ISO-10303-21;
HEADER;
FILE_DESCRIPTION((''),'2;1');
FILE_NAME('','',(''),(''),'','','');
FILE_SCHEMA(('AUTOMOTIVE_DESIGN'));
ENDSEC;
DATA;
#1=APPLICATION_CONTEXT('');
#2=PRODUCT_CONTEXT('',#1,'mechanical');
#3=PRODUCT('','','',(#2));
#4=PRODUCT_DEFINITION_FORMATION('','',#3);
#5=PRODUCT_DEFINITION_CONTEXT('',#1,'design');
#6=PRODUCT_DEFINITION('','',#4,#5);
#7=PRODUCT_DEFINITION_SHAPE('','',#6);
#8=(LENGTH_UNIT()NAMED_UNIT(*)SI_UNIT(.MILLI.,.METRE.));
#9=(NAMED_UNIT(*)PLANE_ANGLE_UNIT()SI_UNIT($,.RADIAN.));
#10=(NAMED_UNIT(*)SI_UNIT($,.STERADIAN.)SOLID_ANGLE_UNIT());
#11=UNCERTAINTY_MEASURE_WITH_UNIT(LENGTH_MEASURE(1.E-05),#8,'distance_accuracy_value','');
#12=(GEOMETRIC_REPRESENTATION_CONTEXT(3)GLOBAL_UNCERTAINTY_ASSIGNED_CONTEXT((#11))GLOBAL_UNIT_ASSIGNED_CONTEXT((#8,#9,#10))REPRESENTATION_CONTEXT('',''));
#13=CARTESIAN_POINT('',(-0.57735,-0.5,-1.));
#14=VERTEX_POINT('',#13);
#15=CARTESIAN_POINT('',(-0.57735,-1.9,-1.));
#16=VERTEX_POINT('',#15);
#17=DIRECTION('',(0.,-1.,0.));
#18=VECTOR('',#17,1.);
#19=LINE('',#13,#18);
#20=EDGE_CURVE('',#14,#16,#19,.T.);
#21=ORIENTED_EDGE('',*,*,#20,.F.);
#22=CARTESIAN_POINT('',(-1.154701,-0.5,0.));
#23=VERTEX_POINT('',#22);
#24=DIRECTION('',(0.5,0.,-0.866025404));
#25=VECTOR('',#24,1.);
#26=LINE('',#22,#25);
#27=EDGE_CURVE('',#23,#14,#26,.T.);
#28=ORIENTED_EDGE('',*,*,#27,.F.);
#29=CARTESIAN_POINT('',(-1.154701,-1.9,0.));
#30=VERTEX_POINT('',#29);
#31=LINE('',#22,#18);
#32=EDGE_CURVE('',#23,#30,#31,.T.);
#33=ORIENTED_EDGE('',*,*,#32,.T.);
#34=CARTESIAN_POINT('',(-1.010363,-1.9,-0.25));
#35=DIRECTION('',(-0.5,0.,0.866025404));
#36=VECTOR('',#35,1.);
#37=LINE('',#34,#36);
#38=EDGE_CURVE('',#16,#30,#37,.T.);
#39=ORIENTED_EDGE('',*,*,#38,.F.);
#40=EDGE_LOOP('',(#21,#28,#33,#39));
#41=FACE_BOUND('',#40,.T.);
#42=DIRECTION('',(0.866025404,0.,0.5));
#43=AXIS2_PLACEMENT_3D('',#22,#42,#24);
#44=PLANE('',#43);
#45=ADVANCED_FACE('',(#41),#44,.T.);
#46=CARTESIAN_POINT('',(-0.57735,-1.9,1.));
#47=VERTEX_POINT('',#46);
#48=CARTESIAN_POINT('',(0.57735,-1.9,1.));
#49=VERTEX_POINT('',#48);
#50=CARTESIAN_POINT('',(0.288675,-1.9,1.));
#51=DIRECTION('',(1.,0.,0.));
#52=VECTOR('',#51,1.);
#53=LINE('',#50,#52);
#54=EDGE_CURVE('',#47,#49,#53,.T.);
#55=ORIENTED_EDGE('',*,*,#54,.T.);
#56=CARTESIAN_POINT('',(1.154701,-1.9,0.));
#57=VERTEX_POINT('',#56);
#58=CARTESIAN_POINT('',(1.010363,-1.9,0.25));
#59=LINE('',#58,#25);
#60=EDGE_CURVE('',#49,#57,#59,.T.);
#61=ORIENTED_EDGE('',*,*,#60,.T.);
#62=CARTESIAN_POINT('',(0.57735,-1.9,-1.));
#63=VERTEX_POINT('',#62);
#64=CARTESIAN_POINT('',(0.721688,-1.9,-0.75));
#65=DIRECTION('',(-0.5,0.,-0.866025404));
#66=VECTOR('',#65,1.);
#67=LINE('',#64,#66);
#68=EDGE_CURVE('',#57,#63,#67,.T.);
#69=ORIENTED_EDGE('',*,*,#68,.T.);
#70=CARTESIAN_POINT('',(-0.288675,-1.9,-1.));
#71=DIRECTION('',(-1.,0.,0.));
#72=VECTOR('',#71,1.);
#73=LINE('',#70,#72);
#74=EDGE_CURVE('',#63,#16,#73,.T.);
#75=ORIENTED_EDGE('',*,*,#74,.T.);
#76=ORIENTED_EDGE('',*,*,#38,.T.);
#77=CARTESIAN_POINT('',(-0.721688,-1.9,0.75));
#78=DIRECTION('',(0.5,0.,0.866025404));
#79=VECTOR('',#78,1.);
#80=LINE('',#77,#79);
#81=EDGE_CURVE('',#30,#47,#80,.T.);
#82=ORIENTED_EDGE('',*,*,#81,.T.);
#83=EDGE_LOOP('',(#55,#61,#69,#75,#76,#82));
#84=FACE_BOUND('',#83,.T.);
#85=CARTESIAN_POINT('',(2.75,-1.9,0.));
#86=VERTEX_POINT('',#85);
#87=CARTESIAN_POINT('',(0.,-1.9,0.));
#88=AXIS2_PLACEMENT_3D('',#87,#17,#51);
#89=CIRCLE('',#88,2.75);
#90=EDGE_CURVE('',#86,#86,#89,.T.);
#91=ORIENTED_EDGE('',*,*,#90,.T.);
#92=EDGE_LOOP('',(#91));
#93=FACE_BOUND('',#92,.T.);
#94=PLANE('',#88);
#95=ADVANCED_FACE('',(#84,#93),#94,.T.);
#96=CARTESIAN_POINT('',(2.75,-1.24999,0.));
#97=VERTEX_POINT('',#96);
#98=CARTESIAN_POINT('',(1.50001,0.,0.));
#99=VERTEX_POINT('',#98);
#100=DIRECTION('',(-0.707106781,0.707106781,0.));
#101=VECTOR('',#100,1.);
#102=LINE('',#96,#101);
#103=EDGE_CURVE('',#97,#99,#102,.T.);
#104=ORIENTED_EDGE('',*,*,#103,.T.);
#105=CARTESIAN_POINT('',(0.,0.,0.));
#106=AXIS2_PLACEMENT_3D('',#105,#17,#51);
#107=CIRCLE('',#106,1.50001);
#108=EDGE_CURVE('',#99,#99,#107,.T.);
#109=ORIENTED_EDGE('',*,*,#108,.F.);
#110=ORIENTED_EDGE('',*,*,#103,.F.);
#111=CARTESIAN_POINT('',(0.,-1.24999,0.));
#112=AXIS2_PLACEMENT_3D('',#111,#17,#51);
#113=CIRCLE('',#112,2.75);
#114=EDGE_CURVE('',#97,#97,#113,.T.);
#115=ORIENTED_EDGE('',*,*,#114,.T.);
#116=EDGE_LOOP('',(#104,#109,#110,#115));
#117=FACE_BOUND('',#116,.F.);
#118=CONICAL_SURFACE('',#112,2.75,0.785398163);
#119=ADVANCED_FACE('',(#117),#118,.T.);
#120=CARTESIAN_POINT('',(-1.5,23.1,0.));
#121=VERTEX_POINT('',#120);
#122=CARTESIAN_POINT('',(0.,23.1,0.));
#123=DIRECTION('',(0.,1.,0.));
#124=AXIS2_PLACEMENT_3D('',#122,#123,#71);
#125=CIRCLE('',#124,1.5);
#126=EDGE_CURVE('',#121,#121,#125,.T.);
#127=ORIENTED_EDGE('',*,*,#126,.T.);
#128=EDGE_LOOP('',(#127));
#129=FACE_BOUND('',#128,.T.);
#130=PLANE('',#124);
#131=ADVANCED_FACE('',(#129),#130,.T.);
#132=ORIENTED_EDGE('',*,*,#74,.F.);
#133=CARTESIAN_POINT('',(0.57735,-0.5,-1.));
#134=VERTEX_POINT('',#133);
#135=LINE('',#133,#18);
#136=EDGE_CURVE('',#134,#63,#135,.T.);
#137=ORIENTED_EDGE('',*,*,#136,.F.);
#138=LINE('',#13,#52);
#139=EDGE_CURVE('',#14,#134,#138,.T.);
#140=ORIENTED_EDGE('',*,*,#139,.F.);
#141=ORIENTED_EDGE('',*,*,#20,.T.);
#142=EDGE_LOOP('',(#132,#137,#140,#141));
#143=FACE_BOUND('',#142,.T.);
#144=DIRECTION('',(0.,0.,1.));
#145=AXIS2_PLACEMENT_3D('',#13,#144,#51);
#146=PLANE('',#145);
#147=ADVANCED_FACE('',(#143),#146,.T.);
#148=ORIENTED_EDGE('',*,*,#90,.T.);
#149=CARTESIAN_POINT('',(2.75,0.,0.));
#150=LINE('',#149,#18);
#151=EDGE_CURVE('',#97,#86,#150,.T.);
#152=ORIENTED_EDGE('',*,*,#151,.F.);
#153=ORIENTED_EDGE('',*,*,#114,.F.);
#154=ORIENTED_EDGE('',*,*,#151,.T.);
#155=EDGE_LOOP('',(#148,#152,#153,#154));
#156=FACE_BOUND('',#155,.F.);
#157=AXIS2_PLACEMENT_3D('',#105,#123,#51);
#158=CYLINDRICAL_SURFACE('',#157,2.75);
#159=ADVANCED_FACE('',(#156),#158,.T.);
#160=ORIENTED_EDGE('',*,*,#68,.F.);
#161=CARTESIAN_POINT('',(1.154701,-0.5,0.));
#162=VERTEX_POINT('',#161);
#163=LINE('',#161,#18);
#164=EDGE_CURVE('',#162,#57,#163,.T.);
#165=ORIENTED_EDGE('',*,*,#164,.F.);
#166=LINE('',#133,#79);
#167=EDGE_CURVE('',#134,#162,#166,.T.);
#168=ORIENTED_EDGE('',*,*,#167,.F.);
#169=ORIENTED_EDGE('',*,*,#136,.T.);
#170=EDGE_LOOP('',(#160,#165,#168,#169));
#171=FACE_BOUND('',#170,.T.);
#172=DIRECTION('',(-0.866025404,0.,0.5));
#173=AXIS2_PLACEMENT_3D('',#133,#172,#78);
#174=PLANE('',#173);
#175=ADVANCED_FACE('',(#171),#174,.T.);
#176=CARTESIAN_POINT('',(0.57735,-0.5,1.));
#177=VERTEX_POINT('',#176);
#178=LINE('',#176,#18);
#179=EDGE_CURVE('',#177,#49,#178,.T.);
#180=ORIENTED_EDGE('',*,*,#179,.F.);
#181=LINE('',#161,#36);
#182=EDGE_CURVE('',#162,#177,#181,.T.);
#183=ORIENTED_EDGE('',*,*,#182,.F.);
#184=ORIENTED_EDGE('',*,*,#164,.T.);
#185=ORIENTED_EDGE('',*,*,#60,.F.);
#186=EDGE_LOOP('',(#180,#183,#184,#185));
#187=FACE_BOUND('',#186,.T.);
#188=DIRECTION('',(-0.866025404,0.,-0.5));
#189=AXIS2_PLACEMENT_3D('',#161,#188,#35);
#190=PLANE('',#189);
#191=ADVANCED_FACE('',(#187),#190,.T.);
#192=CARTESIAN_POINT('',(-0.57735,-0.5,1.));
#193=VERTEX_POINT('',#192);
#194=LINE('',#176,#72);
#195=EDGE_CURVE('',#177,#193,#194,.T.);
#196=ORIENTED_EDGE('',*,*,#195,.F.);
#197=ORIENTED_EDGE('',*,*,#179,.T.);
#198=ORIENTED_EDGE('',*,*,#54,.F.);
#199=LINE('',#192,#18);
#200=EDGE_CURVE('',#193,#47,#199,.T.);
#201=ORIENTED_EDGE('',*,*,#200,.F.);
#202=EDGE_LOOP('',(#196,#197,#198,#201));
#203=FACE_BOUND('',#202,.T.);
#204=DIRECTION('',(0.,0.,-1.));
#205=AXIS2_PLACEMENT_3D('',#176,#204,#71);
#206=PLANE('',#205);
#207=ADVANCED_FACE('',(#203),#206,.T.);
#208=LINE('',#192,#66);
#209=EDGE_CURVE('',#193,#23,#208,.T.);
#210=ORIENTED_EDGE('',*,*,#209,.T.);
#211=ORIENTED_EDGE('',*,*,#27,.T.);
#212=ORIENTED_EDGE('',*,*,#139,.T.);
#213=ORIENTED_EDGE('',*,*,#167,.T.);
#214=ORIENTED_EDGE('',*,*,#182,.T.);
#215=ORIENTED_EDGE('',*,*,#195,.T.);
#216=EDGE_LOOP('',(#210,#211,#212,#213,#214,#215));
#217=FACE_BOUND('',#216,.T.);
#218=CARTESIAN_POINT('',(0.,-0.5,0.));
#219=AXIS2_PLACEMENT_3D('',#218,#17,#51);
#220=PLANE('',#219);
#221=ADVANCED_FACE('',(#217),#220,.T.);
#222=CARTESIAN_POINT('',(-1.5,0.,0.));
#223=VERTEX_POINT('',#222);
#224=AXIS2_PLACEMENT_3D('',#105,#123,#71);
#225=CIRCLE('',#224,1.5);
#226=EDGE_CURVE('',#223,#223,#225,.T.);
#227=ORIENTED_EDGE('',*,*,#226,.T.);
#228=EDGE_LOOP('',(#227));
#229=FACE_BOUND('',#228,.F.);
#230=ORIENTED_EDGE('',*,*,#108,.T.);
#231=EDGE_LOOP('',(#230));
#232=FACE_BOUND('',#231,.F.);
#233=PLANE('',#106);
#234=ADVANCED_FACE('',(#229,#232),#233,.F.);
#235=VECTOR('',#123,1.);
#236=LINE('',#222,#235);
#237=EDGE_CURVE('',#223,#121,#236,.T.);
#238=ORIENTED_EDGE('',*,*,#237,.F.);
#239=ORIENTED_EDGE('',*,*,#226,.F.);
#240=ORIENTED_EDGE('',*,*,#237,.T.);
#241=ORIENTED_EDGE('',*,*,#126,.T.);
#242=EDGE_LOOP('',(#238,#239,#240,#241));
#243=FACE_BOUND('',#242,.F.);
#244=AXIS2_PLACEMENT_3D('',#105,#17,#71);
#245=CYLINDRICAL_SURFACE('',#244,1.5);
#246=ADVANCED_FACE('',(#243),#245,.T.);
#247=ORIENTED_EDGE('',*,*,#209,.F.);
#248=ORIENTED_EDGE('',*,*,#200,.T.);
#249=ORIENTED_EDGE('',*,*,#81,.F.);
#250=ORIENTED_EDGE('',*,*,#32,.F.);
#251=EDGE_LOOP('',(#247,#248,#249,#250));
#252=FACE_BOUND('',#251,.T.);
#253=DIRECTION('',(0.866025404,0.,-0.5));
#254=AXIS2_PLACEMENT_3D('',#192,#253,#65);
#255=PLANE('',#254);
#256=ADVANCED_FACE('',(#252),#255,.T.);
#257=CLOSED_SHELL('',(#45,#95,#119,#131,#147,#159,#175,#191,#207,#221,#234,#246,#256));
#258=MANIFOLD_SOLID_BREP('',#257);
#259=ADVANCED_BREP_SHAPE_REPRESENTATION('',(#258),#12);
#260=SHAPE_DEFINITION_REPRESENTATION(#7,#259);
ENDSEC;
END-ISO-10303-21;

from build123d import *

# Parameters (mm, degrees)
F0_R     = 2.75
F1_DEPTH = 1.9
F2_R     = 1.5
F3_DEPTH = 23.1
F5_START = 0.5
F5_DEPTH = 4.5
F6_SIZE2 = 1.24999
F6_SIZE  = 1.24999


# Not quite as in the source:
# - a fillet or chamfer is up to 0.001 mm smaller than in the source, because OpenCascade refuses the exact size


with BuildPart() as f1:
    # F0 (on Front) → F1 (new body)
    with BuildSketch(Plane.XZ):
        Circle(F0_R)
    extrude(amount=F1_DEPTH)

    # F2 (on face) → F3 (join)
    with BuildSketch(Plane(origin=(0, 0, 0), x_dir=(-1, 0, 0), z_dir=(0, 1, 0))):
        Circle(F2_R)
    extrude(amount=F3_DEPTH)

    # F4 (on Front) → F5 (cut)
    with BuildSketch(Plane.XZ.offset(F5_START)):
        Polygon((1.1547005384, 0), (0.5773502692, 1), (-0.5773502692, 1), (-1.1547005384, 0), (-0.5773502692, -1), (0.5773502692, -1), align=None)
    extrude(amount=F5_DEPTH, mode=Mode.SUBTRACT)

    # F6 (size 1.25 and 1.25 in the source; OpenCascade refuses exactly that, so slightly less here)
    f6_edges = [f1.edges().sort_by_distance(p)[0] for p in [
        (-2.75, 0, 0),
    ]]
    chamfer(f6_edges, length=F6_SIZE, length2=F6_SIZE2)


solid = f1.part
